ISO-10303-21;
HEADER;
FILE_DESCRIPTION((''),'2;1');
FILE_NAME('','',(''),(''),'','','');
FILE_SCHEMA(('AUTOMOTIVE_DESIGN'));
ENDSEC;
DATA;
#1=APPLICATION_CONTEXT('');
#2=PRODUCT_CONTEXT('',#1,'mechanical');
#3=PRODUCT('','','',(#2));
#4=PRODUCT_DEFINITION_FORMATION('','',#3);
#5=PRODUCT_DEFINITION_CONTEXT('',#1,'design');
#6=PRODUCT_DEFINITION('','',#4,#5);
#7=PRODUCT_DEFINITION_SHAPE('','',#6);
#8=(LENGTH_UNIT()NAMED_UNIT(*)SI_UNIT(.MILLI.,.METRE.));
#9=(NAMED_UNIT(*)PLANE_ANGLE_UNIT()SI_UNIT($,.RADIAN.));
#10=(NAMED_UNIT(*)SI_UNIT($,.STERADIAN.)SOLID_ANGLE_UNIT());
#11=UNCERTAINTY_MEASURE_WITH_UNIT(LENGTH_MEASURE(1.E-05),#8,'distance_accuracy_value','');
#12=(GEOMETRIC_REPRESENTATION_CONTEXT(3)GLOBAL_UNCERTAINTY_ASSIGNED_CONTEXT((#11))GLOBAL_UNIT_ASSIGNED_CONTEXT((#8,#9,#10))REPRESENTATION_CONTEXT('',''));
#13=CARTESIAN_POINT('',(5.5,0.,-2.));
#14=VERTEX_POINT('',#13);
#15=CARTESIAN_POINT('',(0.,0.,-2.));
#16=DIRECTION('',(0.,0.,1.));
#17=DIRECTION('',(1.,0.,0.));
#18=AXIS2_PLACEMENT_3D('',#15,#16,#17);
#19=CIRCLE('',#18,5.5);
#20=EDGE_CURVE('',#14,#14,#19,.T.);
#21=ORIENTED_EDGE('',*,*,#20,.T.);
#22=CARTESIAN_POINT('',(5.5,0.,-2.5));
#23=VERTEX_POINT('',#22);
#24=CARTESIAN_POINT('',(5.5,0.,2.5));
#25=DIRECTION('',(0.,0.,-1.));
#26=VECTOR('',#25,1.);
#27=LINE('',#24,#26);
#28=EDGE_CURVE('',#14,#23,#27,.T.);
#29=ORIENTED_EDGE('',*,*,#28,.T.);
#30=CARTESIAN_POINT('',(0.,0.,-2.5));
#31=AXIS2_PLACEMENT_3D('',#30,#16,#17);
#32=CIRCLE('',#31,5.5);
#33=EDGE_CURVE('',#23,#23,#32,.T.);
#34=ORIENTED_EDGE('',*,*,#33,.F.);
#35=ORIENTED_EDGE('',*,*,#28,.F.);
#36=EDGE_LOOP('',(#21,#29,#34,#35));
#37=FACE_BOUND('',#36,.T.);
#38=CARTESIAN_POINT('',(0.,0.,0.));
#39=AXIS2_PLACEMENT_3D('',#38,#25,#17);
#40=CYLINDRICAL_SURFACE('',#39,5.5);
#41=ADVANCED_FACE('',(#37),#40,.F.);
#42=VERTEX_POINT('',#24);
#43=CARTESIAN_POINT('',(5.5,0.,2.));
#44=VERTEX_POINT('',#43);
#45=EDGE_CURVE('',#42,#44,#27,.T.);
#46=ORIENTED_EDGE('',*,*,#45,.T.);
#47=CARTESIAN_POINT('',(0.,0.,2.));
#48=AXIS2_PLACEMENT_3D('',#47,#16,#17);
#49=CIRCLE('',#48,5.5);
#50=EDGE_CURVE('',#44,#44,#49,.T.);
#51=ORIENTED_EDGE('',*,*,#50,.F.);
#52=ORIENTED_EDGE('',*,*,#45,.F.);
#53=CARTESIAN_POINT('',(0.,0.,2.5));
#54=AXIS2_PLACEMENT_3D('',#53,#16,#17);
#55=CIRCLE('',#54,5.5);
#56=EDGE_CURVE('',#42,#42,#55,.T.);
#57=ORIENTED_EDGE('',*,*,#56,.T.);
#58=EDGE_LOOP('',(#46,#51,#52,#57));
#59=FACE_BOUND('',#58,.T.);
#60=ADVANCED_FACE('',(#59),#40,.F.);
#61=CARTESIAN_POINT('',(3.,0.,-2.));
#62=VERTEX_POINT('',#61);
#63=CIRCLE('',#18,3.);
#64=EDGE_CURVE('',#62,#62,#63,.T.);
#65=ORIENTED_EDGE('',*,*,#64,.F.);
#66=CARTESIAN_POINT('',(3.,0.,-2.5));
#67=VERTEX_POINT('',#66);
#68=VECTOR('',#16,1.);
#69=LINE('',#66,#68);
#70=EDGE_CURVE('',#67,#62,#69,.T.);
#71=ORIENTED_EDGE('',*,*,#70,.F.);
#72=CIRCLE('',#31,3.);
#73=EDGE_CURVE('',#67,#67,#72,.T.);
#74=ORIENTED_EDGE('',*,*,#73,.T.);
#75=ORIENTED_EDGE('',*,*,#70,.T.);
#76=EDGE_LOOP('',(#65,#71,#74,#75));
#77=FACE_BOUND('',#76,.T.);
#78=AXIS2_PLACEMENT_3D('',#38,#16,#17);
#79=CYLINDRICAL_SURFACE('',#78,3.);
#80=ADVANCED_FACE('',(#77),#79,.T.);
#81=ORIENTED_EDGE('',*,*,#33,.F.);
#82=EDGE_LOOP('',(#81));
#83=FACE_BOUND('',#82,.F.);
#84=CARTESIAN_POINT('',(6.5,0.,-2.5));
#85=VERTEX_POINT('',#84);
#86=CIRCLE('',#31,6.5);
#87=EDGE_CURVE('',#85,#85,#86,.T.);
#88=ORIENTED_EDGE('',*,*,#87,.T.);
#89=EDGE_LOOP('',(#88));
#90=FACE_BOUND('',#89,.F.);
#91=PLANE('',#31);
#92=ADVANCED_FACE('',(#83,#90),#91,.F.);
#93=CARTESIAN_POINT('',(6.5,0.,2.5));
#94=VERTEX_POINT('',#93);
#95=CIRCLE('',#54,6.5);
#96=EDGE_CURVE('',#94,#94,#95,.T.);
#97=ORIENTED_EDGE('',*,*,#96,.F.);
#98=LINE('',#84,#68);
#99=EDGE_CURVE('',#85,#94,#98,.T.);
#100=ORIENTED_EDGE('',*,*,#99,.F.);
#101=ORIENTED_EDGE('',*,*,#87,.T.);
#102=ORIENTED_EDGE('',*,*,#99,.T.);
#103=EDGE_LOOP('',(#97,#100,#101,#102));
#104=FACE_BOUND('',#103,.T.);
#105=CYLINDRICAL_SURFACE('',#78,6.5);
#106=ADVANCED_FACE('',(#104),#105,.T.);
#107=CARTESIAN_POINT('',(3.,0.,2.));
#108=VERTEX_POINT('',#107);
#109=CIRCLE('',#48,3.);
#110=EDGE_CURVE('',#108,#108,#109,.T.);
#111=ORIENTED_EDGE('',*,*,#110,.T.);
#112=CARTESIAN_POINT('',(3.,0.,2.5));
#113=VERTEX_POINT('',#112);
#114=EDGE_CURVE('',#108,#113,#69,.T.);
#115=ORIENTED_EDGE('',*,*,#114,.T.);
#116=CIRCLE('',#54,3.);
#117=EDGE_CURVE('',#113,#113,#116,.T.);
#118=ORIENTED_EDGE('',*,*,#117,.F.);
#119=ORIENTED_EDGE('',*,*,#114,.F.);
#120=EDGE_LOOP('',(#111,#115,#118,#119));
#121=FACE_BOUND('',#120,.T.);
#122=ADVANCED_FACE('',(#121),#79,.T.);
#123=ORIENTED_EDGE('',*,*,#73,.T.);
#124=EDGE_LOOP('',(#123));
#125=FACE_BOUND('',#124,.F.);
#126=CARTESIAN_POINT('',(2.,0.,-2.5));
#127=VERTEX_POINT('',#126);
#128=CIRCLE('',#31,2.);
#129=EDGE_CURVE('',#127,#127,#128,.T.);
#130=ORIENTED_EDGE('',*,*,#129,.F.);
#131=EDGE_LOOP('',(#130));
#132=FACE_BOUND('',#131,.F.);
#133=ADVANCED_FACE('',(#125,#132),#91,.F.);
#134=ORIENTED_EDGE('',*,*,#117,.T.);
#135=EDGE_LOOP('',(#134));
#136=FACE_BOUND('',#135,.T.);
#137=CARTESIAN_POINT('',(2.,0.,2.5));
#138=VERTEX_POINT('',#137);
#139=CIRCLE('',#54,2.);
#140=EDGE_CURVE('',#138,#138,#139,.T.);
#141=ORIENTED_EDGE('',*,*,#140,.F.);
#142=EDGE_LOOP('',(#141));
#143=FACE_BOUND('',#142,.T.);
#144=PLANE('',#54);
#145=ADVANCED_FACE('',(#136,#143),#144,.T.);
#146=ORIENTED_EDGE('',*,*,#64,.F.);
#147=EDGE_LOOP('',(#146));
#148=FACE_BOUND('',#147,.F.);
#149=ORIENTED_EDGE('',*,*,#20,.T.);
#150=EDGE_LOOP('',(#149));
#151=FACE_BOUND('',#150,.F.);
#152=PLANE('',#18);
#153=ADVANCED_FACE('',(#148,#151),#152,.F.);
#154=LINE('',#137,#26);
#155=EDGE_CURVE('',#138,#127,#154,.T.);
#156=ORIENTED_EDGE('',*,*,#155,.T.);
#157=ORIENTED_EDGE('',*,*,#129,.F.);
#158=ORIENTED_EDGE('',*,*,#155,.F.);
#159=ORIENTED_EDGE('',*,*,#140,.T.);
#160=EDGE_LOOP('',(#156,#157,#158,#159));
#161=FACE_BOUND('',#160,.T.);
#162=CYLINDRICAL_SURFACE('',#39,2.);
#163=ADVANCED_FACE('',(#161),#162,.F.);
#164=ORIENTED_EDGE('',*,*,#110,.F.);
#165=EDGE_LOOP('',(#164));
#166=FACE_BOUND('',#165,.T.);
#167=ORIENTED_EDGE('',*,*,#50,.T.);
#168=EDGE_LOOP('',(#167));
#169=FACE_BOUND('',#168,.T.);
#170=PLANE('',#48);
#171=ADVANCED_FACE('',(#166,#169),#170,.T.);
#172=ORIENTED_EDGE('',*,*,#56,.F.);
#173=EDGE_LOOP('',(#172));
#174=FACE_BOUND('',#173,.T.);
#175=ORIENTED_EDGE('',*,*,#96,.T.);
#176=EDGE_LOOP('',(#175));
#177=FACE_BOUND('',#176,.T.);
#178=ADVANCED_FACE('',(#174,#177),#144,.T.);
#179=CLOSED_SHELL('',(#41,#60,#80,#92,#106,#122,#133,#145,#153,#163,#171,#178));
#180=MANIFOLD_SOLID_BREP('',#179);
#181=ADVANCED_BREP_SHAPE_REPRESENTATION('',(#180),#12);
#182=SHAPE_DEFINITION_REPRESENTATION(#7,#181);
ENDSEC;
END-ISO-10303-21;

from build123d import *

# Parameters (mm, degrees)
F0_R     = 6.5
F0_R_2   = 5.5
F1_DEPTH = 2.5
F0_R_3   = 3
F0_R_4   = 2
F2_DEPTH = 2


with BuildPart() as f1:
    # F0 (on Top) → F1 (new body, symmetric)
    with BuildSketch(Plane.XY):
        Circle(F0_R)
        Circle(F0_R_2, mode=Mode.SUBTRACT)
    extrude(amount=F1_DEPTH, both=True)



with BuildPart() as f1b:
    # F0 (on Top) → F1, piece 2 (new body, symmetric)
    with BuildSketch(Plane.XY):
        Circle(F0_R_3)
        Circle(F0_R_4, mode=Mode.SUBTRACT)
    extrude(amount=F1_DEPTH, both=True)


with BuildPart() as f1_1:
    add(f1.part)

    add(f1b.part)  # F2 merges F1b
    # F0 (on Top) → F2 (join, symmetric)
    with BuildSketch(Plane.XY):
        Circle(F0_R_2)
        Circle(F0_R_3, mode=Mode.SUBTRACT)
    extrude(amount=F2_DEPTH, both=True)


solid = f1_1.part
